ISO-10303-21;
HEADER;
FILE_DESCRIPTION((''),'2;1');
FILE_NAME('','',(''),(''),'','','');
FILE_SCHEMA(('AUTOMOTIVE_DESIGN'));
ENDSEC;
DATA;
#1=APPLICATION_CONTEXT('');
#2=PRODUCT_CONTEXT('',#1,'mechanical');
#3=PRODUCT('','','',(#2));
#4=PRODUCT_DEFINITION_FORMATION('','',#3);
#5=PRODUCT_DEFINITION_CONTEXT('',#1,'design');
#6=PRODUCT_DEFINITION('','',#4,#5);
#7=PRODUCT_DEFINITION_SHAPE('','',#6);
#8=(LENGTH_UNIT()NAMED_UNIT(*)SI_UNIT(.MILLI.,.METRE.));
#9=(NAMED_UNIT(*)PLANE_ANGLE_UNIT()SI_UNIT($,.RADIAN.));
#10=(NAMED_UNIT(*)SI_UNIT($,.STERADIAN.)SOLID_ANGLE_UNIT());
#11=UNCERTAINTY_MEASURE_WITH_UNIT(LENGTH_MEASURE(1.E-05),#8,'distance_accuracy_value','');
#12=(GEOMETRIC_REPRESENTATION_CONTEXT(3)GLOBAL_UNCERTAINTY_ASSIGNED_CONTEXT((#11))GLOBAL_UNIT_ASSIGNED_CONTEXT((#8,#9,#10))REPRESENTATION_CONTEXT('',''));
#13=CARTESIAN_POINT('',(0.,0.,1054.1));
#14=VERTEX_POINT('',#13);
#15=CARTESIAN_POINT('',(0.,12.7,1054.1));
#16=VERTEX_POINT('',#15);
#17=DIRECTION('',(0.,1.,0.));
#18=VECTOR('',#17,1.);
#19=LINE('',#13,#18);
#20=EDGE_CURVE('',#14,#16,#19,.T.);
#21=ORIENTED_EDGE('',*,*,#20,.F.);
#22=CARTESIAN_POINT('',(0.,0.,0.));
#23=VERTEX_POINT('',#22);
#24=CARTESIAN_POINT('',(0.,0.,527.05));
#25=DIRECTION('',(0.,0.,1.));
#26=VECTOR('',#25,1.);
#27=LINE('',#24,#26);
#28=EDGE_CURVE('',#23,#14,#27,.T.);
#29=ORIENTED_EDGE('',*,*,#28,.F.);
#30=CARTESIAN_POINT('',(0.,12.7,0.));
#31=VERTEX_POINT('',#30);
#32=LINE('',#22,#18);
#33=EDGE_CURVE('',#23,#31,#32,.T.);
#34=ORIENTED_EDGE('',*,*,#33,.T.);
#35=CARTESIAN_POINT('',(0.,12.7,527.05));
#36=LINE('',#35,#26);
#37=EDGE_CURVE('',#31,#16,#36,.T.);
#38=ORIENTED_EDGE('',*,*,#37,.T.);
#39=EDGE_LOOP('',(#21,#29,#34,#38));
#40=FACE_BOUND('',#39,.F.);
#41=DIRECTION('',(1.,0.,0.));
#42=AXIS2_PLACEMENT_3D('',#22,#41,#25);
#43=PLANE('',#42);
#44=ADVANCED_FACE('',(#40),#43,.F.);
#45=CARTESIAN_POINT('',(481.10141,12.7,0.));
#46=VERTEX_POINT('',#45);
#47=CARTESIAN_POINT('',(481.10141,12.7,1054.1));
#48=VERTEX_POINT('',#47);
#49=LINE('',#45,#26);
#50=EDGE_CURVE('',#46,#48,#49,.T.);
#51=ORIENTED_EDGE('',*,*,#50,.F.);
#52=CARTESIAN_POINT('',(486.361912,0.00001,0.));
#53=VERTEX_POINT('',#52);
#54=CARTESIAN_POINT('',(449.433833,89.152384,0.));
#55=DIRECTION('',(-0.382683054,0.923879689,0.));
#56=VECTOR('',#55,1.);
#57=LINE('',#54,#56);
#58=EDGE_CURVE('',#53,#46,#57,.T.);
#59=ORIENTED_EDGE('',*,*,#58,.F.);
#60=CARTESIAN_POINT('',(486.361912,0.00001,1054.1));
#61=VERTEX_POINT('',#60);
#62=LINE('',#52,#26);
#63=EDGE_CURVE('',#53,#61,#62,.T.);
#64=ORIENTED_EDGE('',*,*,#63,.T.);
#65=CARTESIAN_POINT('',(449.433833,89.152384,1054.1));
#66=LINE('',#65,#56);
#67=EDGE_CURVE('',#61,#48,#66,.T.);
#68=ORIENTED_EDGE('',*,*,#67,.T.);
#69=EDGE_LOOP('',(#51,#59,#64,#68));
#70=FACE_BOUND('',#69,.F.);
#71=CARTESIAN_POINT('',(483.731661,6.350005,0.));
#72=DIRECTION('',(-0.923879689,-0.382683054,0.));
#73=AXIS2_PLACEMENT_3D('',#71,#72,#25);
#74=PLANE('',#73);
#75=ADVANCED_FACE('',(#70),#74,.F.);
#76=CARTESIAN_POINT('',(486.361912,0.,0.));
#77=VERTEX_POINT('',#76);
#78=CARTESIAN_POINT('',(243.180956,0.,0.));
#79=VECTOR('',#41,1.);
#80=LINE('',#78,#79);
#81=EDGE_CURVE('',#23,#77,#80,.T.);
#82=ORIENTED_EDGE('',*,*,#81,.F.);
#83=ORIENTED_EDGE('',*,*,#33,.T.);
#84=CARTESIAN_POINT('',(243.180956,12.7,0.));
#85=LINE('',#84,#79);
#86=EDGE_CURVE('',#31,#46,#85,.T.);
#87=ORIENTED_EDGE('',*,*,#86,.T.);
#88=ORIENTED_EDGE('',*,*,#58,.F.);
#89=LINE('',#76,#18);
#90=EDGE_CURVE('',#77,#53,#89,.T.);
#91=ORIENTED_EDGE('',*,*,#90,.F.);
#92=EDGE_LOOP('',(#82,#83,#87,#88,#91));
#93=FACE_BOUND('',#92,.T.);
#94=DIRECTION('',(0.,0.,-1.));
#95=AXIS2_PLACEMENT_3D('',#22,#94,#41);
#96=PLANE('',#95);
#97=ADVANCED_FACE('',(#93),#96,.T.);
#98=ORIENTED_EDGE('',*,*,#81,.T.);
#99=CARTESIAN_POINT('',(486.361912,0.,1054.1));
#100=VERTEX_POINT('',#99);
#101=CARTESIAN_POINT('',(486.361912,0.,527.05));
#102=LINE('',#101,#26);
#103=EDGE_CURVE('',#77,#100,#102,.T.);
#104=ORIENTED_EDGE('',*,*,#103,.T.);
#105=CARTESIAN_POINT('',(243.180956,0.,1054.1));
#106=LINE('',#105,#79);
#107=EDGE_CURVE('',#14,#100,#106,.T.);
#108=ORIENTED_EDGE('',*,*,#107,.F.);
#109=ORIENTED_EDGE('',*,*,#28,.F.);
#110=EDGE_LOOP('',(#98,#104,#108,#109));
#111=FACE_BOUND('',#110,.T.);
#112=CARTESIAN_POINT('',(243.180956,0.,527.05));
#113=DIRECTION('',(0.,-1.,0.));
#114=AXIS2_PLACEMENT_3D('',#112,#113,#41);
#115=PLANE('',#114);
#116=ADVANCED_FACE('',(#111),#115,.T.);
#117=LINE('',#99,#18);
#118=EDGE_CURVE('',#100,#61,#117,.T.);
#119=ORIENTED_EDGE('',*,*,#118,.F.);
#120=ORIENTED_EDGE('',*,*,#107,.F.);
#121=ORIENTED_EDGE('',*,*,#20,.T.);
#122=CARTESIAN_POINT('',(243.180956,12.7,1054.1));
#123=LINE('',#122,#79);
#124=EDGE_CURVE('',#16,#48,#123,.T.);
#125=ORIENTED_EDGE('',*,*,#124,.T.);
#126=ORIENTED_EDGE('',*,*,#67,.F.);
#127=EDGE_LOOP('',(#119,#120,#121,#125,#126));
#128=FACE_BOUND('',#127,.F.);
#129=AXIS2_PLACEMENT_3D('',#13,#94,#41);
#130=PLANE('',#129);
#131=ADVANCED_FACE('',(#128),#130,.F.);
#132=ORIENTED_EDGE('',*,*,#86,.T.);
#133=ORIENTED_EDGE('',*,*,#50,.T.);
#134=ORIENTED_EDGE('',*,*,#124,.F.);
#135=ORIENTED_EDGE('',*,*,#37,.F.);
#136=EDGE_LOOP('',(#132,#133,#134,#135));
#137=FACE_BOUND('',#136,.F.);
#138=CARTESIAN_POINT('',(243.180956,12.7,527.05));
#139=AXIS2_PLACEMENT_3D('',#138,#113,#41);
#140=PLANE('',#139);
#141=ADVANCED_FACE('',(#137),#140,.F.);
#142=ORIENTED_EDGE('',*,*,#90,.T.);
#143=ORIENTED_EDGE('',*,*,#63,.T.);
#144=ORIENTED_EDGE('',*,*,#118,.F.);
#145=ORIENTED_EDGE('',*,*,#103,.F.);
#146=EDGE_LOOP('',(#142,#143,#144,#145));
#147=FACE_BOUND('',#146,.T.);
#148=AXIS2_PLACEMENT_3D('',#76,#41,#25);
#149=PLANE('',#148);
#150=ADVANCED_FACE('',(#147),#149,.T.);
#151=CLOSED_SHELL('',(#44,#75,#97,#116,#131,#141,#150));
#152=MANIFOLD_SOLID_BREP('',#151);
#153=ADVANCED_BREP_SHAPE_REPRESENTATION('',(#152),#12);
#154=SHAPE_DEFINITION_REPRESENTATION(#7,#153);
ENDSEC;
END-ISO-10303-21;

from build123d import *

# Parameters (mm, degrees)
F0_W     = 486.3619122421
F0_H     = 1054.1
F1_DEPTH = 12.7
F2_SIZE2 = 5.260502
F2_SIZE  = 12.69999


# Not quite as in the source:
# - a fillet or chamfer is up to 0.001 mm smaller than in the source, because OpenCascade refuses the exact size


with BuildPart() as f1:
    # F0 (on Front) → F1 (new body)
    with BuildSketch(Plane.XZ):
        with Locations((243.1809561211, 527.05)):
            Rectangle(F0_W, F0_H)
    extrude(amount=-F1_DEPTH)

    # F2 (size 12.7 and 5.2605122421 in the source; OpenCascade refuses exactly that, so slightly less here)
    f2_edges = [f1.edges().sort_by_distance(p)[0] for p in [
        (486.361912, 12.7, 527.05),
    ]]
    f2_side = f1.faces().sort_by_distance((486.361912, 6.35, 527.05))[0]
    chamfer(f2_edges, length=F2_SIZE, length2=F2_SIZE2, reference=f2_side)


solid = f1.part
